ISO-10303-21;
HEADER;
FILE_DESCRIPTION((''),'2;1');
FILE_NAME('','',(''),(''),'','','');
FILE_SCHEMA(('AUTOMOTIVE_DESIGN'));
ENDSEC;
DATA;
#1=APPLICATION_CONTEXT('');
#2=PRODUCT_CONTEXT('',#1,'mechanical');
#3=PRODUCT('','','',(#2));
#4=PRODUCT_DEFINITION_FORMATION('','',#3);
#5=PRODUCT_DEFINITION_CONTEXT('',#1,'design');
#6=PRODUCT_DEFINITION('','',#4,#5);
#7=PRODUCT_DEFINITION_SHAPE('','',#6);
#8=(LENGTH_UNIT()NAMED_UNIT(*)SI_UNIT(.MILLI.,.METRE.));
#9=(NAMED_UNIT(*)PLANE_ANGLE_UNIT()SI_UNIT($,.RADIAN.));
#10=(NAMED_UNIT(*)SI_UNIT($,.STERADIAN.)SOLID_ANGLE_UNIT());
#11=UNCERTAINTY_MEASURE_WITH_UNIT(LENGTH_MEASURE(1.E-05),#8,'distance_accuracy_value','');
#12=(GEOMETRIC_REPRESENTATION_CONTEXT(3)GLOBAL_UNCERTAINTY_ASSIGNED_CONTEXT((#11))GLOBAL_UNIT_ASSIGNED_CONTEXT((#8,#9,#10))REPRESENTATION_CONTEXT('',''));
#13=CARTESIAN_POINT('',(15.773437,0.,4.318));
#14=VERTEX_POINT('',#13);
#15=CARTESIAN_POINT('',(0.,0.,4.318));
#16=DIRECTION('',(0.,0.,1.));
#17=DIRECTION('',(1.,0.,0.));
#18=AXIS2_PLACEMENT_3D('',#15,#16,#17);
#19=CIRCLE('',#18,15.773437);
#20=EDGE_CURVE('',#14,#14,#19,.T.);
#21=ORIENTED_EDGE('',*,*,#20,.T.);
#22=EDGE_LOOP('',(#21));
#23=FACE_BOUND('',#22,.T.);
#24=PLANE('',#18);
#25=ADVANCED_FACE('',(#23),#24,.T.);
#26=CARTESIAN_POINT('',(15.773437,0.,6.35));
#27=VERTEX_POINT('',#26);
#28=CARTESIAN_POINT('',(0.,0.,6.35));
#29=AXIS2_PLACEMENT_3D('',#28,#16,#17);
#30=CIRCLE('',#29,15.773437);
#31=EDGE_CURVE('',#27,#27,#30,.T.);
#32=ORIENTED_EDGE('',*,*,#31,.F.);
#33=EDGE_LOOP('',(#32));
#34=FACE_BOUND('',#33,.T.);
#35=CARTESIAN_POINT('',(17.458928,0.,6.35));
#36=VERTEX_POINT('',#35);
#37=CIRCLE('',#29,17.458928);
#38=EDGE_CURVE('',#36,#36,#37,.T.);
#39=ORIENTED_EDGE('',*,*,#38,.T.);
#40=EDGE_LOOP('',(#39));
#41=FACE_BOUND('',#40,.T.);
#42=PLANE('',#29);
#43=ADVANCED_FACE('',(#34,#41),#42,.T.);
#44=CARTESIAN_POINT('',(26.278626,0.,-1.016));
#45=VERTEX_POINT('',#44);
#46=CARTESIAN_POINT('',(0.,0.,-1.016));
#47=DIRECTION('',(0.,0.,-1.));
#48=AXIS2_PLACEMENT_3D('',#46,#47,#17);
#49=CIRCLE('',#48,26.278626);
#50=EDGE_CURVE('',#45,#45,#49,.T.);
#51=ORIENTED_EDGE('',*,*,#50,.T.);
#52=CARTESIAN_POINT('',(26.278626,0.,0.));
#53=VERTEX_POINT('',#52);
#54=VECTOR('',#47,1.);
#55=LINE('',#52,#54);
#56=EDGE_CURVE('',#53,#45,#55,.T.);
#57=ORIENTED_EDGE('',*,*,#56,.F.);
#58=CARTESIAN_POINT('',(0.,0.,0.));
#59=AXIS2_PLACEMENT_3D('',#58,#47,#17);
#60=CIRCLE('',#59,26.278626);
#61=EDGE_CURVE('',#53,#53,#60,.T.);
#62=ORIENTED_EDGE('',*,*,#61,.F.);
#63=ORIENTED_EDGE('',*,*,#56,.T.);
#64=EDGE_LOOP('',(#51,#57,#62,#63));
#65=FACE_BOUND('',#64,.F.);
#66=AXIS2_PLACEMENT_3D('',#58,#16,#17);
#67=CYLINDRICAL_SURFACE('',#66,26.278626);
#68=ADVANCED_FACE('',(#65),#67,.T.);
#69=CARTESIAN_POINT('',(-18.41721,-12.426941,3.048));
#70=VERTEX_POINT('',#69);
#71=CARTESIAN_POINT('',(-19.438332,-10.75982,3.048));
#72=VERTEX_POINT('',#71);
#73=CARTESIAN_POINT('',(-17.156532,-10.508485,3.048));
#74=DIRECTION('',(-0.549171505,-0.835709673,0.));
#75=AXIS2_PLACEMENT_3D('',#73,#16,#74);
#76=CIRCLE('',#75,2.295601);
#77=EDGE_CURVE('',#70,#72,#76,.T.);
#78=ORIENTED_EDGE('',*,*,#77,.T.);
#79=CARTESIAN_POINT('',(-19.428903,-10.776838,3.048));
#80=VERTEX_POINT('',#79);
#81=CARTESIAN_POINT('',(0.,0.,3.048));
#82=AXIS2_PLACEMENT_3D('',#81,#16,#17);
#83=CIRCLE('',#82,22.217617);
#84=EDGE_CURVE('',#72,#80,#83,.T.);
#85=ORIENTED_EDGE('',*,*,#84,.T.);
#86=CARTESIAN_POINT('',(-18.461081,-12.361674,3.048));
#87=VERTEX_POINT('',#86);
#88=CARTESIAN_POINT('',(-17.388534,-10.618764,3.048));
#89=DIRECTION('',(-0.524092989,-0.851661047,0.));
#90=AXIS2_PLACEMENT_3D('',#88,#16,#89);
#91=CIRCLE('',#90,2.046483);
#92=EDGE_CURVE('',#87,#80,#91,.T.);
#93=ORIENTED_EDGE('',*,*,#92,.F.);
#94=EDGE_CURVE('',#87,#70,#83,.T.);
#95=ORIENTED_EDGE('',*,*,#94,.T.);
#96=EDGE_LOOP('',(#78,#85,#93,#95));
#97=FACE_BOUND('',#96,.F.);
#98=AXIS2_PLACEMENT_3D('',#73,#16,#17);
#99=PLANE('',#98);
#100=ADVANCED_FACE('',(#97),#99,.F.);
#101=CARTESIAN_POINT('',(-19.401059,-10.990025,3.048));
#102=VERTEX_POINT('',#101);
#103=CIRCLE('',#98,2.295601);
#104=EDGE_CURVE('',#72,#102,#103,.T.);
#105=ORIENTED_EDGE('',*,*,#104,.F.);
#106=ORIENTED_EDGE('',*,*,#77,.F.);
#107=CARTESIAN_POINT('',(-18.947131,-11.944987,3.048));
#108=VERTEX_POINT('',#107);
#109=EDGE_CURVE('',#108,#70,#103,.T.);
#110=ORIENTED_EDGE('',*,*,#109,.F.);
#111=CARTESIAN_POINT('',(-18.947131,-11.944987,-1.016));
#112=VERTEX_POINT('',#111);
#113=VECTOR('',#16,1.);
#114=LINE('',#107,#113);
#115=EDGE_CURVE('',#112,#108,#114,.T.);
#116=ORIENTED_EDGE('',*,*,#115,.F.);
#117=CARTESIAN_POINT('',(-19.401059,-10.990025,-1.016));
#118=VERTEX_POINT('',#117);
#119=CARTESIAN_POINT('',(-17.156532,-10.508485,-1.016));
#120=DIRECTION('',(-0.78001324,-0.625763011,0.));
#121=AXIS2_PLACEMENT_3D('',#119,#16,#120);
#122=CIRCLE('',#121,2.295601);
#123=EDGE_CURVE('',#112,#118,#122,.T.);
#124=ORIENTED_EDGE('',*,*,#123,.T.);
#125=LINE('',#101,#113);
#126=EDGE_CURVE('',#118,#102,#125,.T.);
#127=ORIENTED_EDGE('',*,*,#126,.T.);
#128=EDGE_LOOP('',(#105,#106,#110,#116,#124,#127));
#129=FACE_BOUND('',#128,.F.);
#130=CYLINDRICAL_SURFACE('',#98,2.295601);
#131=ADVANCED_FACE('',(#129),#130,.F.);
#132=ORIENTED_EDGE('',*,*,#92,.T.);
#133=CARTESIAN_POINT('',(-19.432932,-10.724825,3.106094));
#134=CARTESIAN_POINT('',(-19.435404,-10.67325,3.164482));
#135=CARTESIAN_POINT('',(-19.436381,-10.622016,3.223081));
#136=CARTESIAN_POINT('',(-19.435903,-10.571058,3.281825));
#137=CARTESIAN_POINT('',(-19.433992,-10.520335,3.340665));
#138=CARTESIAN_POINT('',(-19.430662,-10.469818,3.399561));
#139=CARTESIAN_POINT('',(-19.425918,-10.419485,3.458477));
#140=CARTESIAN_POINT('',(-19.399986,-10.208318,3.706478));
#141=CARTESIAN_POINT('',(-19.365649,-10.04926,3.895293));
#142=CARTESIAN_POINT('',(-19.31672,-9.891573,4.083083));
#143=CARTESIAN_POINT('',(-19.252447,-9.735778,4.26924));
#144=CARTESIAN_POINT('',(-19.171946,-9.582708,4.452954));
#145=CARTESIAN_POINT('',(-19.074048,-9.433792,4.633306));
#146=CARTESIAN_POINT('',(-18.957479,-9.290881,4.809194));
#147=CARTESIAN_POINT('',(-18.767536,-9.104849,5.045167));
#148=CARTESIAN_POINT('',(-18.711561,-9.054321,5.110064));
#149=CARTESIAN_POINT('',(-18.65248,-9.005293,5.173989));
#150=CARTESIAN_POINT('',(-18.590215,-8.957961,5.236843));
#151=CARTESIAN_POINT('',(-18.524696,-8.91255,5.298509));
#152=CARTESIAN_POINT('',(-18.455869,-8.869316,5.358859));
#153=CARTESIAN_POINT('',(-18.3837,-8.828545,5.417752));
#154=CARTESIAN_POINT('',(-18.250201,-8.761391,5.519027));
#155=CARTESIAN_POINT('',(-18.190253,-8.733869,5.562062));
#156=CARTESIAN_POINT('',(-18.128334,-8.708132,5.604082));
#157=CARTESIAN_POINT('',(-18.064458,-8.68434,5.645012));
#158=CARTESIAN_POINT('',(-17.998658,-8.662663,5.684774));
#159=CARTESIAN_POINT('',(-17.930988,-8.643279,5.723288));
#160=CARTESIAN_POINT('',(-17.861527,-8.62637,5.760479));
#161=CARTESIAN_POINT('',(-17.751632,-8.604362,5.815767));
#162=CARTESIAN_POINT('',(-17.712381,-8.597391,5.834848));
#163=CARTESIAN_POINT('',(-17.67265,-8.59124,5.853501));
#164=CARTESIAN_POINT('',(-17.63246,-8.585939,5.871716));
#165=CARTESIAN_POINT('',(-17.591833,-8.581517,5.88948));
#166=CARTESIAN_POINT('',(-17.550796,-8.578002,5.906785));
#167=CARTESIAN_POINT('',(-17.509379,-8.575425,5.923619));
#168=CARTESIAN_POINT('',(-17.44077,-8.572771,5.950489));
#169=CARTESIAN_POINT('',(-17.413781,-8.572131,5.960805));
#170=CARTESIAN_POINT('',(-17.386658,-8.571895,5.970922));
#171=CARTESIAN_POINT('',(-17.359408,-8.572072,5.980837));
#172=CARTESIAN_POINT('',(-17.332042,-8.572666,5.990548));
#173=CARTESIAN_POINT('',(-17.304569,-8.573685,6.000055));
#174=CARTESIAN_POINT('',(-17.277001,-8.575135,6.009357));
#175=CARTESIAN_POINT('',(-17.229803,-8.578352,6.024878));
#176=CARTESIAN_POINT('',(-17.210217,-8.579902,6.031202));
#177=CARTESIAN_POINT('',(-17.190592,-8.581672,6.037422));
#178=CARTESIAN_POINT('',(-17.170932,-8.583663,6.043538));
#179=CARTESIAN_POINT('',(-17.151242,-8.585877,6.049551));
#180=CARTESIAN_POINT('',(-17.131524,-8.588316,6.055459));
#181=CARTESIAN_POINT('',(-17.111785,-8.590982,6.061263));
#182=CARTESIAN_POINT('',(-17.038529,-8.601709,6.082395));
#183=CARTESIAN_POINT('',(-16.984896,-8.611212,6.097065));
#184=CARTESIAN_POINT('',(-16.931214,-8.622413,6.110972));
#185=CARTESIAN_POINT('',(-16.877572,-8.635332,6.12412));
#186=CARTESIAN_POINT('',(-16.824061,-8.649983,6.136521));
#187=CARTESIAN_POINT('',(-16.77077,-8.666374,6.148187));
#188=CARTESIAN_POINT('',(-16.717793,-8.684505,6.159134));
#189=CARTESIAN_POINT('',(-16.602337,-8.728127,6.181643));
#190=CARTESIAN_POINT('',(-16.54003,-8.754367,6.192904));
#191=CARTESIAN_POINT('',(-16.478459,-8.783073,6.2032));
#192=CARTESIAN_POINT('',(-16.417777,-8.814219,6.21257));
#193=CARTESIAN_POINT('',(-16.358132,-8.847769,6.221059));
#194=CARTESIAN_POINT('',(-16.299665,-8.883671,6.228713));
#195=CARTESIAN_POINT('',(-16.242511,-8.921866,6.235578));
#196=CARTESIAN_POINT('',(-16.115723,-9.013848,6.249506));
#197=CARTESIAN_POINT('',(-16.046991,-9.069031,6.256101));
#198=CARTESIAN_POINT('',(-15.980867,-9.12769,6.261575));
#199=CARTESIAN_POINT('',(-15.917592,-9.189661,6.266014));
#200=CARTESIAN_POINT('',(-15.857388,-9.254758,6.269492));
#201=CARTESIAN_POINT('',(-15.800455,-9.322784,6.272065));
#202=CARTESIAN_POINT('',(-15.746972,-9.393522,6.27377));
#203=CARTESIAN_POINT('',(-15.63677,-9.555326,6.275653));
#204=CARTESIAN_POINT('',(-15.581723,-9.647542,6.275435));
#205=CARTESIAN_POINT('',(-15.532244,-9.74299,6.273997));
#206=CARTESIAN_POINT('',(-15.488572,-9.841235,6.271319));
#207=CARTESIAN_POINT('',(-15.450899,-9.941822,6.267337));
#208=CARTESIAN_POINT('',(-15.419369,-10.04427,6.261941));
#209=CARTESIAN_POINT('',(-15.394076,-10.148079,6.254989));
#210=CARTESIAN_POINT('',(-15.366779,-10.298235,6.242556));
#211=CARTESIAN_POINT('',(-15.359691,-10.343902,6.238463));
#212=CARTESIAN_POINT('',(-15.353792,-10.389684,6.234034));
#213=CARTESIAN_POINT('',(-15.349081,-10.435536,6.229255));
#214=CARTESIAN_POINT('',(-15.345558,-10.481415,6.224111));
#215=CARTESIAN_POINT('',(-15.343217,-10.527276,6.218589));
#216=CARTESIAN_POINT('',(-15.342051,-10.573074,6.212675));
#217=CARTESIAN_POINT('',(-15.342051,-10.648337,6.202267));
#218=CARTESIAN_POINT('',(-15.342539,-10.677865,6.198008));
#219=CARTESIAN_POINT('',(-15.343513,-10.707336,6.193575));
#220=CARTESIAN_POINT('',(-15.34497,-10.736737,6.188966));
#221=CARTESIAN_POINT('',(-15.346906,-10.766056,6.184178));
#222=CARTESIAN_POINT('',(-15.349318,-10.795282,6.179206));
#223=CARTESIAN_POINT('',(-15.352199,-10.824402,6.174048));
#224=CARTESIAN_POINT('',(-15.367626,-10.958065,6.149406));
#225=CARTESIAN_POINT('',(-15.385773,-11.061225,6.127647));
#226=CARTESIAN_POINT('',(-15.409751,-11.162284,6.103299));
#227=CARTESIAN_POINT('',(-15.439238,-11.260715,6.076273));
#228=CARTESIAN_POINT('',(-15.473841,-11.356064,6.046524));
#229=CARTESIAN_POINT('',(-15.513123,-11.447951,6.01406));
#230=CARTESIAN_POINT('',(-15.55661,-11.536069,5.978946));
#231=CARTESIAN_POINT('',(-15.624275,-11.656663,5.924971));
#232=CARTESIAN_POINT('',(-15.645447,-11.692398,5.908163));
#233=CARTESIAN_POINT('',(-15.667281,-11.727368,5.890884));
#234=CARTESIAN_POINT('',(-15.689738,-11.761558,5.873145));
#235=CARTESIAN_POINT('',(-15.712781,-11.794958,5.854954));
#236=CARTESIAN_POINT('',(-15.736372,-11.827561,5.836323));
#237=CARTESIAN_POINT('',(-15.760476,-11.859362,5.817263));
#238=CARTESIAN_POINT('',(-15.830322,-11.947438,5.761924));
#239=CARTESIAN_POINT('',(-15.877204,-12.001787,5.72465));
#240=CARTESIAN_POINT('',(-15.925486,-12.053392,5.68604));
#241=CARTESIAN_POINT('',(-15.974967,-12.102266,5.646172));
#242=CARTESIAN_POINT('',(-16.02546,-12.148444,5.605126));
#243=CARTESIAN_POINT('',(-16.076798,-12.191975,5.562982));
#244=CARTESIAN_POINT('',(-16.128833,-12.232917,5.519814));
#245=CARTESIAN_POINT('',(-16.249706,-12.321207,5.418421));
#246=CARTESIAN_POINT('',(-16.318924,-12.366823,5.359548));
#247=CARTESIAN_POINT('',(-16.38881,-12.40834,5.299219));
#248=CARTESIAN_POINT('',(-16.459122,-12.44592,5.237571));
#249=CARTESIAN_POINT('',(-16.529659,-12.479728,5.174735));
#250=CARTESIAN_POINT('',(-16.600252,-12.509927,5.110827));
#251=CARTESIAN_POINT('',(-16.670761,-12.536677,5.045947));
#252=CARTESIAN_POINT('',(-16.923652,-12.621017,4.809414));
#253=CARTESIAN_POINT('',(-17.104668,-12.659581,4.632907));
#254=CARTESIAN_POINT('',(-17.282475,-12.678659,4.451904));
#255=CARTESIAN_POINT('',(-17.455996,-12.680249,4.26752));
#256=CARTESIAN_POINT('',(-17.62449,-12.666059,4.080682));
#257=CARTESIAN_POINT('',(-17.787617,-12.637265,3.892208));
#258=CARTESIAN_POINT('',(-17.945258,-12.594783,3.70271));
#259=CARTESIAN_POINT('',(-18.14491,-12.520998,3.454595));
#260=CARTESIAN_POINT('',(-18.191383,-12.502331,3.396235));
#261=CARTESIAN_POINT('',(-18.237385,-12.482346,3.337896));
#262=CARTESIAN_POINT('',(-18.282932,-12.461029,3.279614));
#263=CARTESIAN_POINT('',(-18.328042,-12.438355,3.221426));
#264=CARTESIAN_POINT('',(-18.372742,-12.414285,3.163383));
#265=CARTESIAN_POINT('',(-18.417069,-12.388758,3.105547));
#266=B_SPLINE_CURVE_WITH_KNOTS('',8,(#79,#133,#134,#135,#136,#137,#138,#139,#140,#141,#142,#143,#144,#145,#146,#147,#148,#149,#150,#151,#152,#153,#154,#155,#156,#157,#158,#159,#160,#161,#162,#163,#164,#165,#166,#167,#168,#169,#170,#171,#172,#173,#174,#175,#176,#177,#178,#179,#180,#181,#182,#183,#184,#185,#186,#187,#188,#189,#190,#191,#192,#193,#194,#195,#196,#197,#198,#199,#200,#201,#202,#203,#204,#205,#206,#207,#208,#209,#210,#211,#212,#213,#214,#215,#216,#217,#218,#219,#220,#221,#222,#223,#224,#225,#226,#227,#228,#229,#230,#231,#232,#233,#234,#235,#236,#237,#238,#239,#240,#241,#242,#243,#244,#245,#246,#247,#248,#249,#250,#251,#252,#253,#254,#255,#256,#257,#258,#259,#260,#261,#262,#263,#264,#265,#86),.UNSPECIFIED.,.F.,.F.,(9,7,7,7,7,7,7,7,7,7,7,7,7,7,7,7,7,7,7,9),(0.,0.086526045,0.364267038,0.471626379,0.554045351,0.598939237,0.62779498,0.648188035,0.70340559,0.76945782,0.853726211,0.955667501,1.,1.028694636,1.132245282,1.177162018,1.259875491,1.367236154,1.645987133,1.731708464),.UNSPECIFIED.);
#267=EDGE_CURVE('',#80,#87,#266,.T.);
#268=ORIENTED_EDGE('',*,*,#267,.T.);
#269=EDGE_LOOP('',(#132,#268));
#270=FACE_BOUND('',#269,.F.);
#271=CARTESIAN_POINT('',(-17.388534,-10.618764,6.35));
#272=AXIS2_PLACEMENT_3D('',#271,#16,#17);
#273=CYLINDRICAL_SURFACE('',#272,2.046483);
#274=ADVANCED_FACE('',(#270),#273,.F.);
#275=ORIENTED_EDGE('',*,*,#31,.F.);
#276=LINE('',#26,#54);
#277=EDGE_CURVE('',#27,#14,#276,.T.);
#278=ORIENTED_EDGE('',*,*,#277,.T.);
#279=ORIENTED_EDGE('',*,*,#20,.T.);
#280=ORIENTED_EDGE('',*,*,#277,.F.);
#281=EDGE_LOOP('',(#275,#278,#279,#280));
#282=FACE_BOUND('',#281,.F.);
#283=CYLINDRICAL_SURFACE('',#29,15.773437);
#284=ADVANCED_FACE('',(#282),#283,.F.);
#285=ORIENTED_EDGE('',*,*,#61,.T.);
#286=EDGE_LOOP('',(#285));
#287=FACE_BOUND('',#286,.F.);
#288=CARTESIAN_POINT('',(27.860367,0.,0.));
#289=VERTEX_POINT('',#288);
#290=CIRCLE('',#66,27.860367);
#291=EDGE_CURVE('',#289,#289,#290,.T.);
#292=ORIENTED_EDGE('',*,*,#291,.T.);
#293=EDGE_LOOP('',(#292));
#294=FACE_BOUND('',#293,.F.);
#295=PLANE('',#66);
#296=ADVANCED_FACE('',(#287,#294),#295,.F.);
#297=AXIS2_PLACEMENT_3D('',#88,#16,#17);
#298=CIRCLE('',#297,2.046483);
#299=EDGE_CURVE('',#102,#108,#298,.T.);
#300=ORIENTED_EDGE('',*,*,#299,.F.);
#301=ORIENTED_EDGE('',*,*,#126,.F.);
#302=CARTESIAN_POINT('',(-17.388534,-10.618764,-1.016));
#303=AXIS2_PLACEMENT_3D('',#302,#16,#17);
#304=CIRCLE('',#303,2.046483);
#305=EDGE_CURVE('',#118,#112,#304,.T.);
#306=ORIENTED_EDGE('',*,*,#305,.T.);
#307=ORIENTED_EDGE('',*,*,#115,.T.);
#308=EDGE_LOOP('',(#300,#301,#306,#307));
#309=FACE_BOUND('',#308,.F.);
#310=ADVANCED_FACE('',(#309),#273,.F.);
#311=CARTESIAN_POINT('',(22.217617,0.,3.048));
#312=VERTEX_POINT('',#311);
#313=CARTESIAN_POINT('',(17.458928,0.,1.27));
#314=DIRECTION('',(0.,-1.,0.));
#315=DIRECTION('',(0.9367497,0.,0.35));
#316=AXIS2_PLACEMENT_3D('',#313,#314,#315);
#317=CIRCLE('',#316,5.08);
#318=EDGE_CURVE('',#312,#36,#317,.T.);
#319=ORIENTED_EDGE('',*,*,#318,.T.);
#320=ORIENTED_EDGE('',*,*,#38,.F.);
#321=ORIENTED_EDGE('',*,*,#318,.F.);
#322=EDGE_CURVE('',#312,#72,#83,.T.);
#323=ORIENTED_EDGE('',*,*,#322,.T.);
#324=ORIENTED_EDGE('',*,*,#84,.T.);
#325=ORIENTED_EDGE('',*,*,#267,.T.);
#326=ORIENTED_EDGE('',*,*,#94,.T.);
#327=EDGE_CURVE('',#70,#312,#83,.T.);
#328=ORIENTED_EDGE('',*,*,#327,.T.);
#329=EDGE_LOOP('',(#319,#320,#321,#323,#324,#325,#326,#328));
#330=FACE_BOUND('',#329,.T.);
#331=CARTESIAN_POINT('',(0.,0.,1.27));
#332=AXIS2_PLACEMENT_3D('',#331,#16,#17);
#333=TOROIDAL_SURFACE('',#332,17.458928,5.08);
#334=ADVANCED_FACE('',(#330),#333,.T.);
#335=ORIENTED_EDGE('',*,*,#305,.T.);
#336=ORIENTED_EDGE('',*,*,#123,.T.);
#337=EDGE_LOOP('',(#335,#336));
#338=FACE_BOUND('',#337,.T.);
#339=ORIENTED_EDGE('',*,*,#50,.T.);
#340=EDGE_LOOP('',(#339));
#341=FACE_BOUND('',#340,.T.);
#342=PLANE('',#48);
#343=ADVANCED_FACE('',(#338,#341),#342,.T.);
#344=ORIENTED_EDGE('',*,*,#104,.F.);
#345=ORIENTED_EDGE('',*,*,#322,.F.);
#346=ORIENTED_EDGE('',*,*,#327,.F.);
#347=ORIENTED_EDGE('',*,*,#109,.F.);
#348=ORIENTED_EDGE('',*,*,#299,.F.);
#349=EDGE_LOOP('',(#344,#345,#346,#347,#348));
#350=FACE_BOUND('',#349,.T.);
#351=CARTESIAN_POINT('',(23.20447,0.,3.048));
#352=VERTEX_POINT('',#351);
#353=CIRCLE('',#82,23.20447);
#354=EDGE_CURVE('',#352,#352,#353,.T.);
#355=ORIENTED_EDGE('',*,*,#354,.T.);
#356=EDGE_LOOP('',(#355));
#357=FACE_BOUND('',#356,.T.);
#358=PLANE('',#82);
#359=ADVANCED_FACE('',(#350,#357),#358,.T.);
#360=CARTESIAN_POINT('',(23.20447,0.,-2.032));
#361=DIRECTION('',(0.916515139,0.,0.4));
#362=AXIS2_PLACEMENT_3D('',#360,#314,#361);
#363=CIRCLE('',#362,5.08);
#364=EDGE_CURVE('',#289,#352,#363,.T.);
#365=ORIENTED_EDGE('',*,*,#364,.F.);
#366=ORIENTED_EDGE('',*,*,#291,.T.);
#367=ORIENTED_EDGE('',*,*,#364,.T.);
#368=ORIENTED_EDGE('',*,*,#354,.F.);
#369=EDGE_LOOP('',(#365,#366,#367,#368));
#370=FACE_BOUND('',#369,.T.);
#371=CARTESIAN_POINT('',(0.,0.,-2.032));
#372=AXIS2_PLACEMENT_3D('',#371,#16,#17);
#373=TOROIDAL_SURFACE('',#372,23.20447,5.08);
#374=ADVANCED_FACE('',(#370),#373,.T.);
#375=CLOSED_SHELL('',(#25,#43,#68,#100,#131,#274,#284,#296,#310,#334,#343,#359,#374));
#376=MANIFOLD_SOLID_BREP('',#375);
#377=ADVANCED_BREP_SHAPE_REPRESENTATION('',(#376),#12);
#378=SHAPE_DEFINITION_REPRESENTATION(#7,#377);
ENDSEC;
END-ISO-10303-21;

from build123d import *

# Parameters (mm, degrees)
F0_R      = 27.8603665739
F1_DEPTH  = 3.048
F4_R      = 26.2786257822
F5_DEPTH  = 1.016
F6_R      = 22.2176168744
F7_DEPTH  = 3.302
F9_R      = 15.773437446
F10_DEPTH = 2.032
F11_R     = 2.2956006308
F12_DEPTH = 21.336
F13_R     = 2.0464830212
F14_DEPTH = 25.4


# Not quite as in the source:
# - a fillet or chamfer that OpenCascade refuses, or shapes differently, is made with other operations: its cross-section is extruded or revolved along the edge and cut away or added


with BuildPart() as f1:
    # F0 (on Top) → F1 (new body)
    with BuildSketch(Plane.XY):
        Circle(F0_R)
    extrude(amount=F1_DEPTH)

    # F2: fillet of radius 5.08 on 1 edges, made by hand

    # F2_s1 → F2_t2 (revolve, cut)
    with BuildSketch(Plane.XZ):
        with BuildLine():
            ThreePointArc((27.8603665739, 0), (25.9869002599, 2.2182329348), (23.2044696678, 3.048))
            Line((23.2044696678, 3.048), (27.8603665739, 3.048))
            Line((27.8603665739, 3.048), (27.8603665739, 0))
        make_face()
    revolve(axis=Axis((0, 0, 3.048), (0, 0, 1)), mode=Mode.SUBTRACT)

    # F4 (on face) → F5 (join)
    with BuildSketch(Plane(origin=(0, 0, 0), x_dir=(1, 0, 0), z_dir=(0, 0, -1))):
        Circle(F4_R)
    extrude(amount=F5_DEPTH)

    # F6 (on face) → F7 (join)
    with BuildSketch(Plane.XY.offset(3.048)):
        Circle(F6_R)
    extrude(amount=F7_DEPTH)

    # F8: fillet of radius 5.08 on 1 edges, made by hand

    # F8_s1 → F8_t2 (revolve, cut)
    with BuildSketch(Plane.XZ):
        with BuildLine():
            ThreePointArc((22.2176168744, 3.048), (20.3549739793, 5.4436458882), (17.4589283996, 6.35))
            Line((17.4589283996, 6.35), (22.2176168744, 6.35))
            Line((22.2176168744, 6.35), (22.2176168744, 3.048))
        make_face()
    revolve(axis=Axis((0, 0, 6.35), (0, 0, 1)), mode=Mode.SUBTRACT)

    # F9 (on face) → F10 (cut)
    with BuildSketch(Plane.XY.offset(6.35)):
        Circle(F9_R)
    extrude(amount=-F10_DEPTH, mode=Mode.SUBTRACT)

    # F11 (on face) → F12 (cut)
    with BuildSketch(Plane.XY.offset(3.048)):
        with Locations((-17.1565320343, -10.5084851384)):
            Circle(F11_R)
    extrude(amount=-F12_DEPTH, mode=Mode.SUBTRACT)

    # F13 (on face) → F14 (cut)
    with BuildSketch(Plane.XY.offset(6.35)):
        with Locations((-17.3885338008, -10.6187639758)):
            Circle(F13_R)
    extrude(amount=-F14_DEPTH, mode=Mode.SUBTRACT)


solid = f1.part
